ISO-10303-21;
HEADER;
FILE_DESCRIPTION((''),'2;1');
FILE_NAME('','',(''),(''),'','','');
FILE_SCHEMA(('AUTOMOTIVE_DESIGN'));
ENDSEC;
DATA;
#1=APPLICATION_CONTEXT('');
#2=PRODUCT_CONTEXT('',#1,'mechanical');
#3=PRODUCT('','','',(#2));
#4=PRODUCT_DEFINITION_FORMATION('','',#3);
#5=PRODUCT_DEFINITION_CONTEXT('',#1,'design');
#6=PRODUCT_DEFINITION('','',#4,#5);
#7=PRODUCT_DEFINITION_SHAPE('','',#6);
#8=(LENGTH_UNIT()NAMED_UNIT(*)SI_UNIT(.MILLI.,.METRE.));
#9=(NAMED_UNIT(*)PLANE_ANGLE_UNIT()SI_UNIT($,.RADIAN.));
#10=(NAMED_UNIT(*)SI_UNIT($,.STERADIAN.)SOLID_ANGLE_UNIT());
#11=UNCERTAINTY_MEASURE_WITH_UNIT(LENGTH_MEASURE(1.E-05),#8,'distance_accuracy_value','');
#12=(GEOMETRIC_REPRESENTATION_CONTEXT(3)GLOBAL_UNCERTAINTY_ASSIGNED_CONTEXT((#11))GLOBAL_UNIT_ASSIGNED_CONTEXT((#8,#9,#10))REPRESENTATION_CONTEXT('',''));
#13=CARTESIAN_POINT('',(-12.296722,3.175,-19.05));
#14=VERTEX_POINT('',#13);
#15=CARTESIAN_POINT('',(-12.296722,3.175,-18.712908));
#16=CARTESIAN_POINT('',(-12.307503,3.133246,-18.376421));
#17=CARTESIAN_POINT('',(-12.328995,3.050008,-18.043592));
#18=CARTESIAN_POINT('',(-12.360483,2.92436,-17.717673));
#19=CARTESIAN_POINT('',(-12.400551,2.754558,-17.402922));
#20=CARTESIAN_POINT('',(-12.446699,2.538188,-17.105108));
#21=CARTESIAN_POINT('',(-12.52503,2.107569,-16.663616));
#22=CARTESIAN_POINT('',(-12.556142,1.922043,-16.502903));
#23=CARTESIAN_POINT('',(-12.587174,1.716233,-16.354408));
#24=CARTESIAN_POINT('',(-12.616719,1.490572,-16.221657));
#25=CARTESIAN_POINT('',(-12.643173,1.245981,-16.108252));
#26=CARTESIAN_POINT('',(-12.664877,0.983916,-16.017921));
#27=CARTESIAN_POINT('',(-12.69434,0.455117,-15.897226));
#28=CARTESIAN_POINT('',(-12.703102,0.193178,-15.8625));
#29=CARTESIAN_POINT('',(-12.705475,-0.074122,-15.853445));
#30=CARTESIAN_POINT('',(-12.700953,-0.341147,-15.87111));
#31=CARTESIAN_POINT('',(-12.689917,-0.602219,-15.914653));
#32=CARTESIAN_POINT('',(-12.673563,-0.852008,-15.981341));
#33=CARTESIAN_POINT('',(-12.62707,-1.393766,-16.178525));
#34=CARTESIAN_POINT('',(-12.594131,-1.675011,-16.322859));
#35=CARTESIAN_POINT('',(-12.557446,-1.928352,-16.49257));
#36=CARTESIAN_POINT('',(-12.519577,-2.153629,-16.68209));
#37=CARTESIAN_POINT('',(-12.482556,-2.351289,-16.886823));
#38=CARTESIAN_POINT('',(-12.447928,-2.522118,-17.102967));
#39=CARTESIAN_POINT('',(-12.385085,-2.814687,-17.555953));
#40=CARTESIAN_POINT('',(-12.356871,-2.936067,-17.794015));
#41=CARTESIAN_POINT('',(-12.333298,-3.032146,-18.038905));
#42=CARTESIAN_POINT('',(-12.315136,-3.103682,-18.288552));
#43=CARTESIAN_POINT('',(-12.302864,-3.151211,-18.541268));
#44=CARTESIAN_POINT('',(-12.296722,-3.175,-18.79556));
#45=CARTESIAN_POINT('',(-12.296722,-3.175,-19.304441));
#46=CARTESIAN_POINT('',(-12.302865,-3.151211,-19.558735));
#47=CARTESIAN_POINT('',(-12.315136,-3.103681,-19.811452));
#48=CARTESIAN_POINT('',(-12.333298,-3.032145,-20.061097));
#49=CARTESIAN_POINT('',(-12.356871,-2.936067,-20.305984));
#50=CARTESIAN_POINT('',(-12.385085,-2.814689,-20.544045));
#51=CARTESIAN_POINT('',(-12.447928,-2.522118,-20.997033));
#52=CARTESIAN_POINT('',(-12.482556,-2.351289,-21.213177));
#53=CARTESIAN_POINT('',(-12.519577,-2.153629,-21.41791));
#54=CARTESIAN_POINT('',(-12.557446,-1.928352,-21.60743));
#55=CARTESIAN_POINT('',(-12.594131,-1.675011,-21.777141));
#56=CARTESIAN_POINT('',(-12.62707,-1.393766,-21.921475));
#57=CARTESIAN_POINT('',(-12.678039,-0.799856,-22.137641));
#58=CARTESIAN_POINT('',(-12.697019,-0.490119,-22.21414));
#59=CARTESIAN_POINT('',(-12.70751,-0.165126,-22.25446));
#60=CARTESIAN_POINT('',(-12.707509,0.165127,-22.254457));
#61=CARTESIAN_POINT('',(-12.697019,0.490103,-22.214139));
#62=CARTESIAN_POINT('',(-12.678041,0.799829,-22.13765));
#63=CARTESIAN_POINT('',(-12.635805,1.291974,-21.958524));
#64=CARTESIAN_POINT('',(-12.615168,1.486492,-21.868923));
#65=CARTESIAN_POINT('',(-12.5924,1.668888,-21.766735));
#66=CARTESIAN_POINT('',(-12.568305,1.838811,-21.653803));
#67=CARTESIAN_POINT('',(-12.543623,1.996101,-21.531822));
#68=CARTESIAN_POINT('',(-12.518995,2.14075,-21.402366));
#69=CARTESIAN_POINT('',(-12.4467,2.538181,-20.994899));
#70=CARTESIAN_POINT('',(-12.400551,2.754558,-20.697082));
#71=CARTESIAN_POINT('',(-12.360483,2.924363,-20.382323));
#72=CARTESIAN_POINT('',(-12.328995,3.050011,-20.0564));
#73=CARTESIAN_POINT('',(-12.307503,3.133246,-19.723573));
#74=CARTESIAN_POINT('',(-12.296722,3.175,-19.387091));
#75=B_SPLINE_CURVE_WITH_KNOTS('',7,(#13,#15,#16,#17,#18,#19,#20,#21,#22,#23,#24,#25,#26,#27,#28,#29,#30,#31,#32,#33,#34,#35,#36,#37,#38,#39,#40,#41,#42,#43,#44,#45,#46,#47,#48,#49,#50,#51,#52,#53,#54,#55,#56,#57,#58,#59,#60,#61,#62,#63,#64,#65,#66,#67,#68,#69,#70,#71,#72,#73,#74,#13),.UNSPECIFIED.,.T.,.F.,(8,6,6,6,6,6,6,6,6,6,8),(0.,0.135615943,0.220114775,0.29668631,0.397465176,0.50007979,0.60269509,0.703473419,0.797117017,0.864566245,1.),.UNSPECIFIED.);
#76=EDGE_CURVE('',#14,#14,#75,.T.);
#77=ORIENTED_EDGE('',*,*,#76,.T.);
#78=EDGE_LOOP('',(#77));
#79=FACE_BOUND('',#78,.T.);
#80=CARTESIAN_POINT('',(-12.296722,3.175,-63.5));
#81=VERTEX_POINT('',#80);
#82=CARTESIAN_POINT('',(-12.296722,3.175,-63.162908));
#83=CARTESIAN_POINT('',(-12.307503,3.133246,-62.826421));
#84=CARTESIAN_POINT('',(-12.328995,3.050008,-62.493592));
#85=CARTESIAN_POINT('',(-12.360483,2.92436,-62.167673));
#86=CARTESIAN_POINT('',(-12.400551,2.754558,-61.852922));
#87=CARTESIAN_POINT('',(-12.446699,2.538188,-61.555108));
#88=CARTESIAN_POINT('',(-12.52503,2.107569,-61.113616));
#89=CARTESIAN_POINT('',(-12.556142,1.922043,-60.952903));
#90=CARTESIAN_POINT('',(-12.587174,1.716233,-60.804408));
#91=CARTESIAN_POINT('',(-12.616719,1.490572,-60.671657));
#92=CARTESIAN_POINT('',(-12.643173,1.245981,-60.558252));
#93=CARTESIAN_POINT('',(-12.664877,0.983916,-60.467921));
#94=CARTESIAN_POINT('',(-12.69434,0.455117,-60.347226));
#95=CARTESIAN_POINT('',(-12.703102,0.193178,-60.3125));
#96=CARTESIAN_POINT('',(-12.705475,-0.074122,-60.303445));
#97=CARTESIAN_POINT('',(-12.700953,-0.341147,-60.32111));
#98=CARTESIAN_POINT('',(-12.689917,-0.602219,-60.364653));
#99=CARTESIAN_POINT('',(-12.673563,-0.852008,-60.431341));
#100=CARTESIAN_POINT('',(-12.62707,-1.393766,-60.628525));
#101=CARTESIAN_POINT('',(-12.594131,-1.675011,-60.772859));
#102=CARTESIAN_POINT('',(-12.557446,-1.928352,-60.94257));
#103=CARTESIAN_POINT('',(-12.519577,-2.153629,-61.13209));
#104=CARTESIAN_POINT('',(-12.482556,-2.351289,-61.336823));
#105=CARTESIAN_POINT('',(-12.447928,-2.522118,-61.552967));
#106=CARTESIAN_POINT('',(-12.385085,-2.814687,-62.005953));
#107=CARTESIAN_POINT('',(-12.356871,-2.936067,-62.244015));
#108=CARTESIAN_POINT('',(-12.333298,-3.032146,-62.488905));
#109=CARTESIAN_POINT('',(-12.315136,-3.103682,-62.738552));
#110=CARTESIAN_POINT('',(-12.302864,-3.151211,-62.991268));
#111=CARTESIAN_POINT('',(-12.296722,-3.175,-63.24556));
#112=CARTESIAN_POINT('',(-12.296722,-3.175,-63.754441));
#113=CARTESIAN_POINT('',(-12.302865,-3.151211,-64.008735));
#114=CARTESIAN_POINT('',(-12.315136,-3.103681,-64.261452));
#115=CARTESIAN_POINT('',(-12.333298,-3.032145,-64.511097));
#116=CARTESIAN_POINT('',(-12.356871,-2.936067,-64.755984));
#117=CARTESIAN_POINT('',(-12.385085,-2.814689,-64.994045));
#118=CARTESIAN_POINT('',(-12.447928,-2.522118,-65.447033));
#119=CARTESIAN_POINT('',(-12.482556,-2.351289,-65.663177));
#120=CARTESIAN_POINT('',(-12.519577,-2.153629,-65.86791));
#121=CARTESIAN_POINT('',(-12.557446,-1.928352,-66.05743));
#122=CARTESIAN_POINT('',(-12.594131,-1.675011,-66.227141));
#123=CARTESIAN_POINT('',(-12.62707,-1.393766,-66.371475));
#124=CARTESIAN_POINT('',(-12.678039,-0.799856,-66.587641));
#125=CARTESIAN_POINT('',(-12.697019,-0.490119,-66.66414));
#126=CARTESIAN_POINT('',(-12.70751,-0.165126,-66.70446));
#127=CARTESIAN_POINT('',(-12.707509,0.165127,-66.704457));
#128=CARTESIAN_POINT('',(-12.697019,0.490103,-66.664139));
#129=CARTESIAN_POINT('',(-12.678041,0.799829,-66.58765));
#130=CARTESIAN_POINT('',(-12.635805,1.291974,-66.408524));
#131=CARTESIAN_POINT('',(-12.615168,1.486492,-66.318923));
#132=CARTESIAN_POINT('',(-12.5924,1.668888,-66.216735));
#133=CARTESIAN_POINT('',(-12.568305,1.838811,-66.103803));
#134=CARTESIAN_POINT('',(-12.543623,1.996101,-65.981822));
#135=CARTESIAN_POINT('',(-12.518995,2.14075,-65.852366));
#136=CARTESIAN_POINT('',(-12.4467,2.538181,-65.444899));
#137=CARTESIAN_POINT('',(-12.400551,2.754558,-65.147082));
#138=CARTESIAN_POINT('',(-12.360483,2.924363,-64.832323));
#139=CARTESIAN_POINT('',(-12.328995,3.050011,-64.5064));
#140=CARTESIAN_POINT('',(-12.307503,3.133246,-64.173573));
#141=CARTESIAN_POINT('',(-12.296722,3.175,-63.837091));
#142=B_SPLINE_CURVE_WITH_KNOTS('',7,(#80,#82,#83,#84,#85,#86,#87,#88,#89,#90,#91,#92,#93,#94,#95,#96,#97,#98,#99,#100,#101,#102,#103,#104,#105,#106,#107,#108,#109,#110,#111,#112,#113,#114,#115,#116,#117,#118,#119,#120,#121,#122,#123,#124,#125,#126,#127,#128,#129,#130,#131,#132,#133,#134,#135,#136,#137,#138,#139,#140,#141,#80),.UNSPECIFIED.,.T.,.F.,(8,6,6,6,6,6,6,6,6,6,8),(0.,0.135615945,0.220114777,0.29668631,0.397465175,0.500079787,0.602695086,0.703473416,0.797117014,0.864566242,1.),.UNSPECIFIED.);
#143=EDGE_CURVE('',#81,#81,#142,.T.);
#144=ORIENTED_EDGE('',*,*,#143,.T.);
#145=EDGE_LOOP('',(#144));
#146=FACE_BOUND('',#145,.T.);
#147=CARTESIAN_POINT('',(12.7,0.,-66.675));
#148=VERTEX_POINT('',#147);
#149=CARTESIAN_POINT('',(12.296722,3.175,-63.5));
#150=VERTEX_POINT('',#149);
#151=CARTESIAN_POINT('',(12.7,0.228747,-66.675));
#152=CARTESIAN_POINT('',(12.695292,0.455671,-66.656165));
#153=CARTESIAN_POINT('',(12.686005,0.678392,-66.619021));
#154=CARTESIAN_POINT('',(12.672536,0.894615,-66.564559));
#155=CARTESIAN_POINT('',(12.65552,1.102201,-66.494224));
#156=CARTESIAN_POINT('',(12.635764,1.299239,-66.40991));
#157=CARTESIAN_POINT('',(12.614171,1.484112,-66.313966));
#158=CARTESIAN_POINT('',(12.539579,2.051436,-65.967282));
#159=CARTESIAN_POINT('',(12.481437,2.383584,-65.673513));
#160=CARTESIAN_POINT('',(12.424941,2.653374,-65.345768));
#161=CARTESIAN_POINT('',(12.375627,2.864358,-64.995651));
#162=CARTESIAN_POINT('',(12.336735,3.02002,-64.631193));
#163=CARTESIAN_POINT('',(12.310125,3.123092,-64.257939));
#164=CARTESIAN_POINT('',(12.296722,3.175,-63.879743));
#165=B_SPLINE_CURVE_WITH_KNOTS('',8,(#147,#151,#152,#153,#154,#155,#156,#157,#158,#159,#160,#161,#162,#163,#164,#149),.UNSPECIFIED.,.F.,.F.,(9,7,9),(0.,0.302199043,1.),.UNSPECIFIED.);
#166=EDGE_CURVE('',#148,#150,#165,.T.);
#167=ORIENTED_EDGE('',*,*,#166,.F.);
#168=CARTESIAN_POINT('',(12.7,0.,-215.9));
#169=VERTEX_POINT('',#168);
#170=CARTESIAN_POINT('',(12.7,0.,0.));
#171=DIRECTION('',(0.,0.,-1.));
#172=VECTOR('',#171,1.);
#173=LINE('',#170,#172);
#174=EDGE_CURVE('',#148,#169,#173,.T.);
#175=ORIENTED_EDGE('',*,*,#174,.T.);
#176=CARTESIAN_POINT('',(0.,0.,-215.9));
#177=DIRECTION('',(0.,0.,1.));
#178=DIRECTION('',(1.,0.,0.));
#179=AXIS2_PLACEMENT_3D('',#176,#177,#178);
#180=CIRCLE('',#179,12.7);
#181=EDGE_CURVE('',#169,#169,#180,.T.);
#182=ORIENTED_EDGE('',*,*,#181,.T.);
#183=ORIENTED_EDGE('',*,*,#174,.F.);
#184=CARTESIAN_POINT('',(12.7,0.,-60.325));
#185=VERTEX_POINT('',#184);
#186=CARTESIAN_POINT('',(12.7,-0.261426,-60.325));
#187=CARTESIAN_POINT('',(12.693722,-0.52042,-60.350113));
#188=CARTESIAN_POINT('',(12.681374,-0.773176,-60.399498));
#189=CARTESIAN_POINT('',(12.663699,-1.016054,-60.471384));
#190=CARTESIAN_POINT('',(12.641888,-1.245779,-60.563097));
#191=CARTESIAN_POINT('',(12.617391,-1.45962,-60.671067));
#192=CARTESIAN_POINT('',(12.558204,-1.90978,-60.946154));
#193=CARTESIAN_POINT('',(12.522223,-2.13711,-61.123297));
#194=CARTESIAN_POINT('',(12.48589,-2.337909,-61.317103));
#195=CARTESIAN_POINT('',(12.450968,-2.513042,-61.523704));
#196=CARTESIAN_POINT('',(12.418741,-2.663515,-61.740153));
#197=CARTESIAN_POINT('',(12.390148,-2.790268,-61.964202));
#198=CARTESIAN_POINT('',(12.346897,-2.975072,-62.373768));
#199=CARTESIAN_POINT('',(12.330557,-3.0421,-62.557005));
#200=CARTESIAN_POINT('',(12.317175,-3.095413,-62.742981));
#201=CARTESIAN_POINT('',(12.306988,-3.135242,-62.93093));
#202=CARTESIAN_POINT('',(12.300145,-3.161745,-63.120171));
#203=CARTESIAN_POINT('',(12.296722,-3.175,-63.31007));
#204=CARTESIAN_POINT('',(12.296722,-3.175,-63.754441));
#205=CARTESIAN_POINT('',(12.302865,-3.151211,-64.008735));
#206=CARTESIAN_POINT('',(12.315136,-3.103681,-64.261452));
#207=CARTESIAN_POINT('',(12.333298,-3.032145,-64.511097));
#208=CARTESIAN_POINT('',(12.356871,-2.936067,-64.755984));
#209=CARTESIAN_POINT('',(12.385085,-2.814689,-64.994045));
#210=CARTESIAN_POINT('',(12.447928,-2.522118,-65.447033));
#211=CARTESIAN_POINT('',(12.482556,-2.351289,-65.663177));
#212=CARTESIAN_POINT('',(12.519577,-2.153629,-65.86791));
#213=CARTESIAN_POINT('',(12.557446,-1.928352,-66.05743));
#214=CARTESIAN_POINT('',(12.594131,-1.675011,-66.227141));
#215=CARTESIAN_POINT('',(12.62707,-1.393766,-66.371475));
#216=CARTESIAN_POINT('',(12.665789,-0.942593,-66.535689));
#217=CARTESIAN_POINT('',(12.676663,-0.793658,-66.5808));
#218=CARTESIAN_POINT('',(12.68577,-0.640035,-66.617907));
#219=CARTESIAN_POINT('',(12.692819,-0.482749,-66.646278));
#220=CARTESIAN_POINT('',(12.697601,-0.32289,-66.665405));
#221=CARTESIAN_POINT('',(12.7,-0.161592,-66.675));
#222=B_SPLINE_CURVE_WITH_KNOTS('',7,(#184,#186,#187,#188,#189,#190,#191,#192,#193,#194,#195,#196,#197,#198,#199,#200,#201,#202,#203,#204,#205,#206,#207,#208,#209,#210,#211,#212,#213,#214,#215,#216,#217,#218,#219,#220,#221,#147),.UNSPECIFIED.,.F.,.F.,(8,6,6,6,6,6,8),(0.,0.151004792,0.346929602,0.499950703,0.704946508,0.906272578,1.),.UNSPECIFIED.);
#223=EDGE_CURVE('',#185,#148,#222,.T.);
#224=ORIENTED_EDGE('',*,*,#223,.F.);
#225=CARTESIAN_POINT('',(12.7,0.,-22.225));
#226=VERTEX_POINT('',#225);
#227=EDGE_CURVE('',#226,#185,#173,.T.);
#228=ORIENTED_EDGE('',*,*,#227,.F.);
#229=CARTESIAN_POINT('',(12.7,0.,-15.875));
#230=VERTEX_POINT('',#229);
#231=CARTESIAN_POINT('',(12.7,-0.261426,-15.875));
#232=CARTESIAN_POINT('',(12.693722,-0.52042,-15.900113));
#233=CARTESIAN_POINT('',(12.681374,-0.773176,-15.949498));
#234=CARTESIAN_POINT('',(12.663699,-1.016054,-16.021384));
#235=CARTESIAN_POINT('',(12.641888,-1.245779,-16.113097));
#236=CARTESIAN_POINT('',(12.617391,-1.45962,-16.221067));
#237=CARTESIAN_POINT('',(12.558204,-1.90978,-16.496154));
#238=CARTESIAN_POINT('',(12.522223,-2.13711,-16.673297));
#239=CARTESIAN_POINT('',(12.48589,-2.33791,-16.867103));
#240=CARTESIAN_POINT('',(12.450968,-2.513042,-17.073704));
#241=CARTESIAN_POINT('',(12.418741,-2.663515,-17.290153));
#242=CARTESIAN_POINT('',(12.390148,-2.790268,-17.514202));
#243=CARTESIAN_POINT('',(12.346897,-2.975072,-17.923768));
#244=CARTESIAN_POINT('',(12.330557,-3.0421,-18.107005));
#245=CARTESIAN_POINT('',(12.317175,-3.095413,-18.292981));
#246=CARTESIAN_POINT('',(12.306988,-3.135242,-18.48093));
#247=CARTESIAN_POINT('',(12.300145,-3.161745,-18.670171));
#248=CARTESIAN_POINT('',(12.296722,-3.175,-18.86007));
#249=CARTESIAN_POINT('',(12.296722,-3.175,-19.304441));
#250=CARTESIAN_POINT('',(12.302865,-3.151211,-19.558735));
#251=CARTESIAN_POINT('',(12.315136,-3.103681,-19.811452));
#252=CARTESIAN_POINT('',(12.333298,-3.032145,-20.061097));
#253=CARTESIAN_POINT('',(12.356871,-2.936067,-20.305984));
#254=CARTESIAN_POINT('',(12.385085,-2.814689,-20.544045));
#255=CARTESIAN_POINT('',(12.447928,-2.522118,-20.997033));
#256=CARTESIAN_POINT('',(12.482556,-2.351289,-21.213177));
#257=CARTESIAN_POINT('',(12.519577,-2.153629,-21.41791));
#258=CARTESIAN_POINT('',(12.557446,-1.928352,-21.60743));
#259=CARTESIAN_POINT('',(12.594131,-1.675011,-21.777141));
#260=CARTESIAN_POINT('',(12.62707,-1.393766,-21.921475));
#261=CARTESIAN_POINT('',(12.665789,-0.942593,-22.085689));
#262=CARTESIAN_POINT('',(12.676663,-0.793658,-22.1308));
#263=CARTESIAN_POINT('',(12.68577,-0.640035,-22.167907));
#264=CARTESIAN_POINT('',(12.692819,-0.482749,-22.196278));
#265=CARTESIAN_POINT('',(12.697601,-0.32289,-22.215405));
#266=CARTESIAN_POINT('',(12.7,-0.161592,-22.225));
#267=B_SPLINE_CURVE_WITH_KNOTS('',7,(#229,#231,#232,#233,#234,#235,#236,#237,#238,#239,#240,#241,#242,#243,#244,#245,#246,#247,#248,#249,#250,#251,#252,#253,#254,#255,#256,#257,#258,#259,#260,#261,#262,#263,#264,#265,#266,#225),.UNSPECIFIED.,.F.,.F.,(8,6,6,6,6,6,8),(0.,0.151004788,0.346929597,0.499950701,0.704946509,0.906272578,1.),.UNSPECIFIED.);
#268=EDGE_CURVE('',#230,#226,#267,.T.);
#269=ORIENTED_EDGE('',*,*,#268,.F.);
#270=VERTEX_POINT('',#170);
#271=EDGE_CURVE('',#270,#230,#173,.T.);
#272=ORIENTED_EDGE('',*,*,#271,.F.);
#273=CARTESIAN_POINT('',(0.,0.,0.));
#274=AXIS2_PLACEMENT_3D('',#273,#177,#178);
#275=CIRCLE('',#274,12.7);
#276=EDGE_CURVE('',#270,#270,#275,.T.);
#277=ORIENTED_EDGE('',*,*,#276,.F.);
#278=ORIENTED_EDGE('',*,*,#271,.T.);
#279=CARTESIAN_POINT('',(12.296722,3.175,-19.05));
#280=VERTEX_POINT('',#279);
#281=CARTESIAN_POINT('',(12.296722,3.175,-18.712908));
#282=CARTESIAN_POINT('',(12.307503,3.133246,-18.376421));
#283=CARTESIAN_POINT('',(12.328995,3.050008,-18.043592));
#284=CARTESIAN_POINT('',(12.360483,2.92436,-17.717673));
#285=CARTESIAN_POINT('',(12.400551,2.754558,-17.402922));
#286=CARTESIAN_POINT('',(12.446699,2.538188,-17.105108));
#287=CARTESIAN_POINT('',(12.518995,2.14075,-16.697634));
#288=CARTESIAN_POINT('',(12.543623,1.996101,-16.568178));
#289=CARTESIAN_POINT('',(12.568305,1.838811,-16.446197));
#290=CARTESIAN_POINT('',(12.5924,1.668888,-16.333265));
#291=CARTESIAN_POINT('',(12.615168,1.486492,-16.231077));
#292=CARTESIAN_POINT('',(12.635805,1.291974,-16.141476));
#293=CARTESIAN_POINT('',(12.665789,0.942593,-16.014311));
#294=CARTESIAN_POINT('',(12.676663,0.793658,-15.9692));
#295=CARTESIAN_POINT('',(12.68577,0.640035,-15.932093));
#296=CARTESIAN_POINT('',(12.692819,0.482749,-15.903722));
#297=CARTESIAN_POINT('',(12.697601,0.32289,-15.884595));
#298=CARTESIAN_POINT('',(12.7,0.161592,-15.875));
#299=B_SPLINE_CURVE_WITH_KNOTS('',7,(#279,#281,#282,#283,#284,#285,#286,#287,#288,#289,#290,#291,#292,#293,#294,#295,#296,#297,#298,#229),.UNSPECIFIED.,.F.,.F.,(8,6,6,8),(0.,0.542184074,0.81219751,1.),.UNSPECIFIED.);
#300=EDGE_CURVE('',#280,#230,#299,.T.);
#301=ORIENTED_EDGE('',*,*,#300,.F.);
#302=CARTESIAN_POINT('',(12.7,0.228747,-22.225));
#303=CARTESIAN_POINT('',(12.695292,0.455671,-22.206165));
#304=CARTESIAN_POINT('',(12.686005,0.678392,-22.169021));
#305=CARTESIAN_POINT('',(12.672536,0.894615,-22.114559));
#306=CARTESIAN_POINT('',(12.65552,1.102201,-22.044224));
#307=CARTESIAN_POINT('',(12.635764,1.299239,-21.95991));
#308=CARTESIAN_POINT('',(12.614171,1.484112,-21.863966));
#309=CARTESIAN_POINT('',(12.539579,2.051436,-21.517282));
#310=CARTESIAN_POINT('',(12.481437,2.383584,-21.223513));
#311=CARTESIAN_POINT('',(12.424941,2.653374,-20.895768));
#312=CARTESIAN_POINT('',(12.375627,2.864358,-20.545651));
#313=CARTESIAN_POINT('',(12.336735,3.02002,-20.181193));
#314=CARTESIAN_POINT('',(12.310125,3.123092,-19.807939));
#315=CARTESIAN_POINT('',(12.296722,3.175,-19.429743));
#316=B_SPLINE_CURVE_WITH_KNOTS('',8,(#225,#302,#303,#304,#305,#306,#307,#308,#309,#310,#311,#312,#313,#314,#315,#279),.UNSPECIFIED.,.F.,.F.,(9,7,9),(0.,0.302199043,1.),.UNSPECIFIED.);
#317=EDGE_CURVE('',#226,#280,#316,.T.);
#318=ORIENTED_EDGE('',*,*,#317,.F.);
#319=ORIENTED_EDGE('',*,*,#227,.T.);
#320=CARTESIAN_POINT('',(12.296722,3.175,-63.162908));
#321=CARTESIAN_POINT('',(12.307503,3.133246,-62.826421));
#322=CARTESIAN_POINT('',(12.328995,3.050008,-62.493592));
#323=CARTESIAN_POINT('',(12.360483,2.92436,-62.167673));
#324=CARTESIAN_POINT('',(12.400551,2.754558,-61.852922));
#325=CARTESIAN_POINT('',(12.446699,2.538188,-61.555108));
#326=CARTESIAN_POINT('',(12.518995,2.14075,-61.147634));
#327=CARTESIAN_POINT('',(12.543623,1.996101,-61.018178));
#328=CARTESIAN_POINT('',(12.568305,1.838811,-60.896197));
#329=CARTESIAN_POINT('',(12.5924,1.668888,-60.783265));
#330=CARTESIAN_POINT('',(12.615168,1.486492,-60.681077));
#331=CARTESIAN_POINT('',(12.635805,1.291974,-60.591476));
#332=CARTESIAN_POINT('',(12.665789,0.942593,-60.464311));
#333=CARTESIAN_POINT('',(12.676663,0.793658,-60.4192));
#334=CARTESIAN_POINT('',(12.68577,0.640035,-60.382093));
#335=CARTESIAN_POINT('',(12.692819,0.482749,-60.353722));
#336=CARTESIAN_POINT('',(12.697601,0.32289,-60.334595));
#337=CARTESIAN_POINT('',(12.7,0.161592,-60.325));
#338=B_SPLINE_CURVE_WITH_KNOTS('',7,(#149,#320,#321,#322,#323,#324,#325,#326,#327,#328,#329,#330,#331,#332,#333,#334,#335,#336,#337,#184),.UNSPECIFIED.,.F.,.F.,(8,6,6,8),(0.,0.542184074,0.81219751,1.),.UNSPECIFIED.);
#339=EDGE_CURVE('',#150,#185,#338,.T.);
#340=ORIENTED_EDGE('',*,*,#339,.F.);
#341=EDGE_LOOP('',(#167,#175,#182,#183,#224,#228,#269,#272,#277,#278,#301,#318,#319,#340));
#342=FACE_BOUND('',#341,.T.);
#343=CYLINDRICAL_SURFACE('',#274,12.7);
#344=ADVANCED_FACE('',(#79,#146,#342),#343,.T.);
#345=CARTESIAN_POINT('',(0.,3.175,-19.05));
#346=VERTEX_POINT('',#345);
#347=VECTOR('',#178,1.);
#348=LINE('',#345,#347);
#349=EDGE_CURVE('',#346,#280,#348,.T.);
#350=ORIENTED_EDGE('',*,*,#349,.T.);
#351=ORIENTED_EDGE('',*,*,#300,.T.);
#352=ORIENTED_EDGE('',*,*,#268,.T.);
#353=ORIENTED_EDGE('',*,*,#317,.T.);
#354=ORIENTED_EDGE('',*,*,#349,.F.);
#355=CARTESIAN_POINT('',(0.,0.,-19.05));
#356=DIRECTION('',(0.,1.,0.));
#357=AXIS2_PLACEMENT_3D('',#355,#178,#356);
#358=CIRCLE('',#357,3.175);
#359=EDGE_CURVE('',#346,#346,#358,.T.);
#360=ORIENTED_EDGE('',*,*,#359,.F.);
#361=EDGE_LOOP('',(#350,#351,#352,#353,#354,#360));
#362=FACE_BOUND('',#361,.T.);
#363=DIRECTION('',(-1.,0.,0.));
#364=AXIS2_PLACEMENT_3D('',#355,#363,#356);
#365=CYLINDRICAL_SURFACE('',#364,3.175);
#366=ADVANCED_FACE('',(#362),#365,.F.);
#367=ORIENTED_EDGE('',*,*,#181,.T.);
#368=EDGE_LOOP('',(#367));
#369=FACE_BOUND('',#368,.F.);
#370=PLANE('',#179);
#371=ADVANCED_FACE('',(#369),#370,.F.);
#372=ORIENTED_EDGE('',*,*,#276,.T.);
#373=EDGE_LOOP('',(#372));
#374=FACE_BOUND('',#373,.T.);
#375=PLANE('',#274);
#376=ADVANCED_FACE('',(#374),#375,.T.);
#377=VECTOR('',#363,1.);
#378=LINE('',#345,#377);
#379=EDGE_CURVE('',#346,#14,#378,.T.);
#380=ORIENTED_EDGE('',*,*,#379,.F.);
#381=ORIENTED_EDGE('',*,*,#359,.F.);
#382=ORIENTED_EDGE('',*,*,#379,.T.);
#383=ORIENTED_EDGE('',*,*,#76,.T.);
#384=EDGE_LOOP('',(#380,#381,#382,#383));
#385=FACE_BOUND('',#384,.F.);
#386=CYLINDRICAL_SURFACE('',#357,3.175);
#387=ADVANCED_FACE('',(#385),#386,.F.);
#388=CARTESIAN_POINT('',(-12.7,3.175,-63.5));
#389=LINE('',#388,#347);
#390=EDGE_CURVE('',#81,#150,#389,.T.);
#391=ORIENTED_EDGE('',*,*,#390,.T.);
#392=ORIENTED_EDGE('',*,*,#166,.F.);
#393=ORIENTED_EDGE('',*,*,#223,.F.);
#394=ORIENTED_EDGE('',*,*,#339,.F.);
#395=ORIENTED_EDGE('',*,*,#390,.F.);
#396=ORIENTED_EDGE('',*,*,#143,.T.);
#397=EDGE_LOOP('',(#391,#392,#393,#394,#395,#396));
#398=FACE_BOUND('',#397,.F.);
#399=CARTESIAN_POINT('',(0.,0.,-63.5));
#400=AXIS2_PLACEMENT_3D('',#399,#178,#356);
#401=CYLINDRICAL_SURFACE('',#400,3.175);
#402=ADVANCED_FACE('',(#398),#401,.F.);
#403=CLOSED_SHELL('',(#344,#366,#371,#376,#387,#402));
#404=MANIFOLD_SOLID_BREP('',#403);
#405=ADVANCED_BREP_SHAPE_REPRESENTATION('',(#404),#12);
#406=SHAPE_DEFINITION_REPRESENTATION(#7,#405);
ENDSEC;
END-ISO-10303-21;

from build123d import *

# Parameters (mm, degrees)
F0_R     = 12.7
F1_DEPTH = 215.9
F2_R     = 3.175
F3_DEPTH = 12.7


with BuildPart() as f1:
    # F0 (on Top) → F1 (new body)
    with BuildSketch(Plane.XY):
        Circle(F0_R)
    extrude(amount=-F1_DEPTH)

    # F2 (on Right) → F3 (cut, symmetric)
    with BuildSketch(Plane.YZ):
        with Locations((0, -19.05)):
            Circle(F2_R)
        with Locations((0, -63.5)):
            Circle(F2_R)
    extrude(amount=F3_DEPTH, both=True, mode=Mode.SUBTRACT)


solid = f1.part
